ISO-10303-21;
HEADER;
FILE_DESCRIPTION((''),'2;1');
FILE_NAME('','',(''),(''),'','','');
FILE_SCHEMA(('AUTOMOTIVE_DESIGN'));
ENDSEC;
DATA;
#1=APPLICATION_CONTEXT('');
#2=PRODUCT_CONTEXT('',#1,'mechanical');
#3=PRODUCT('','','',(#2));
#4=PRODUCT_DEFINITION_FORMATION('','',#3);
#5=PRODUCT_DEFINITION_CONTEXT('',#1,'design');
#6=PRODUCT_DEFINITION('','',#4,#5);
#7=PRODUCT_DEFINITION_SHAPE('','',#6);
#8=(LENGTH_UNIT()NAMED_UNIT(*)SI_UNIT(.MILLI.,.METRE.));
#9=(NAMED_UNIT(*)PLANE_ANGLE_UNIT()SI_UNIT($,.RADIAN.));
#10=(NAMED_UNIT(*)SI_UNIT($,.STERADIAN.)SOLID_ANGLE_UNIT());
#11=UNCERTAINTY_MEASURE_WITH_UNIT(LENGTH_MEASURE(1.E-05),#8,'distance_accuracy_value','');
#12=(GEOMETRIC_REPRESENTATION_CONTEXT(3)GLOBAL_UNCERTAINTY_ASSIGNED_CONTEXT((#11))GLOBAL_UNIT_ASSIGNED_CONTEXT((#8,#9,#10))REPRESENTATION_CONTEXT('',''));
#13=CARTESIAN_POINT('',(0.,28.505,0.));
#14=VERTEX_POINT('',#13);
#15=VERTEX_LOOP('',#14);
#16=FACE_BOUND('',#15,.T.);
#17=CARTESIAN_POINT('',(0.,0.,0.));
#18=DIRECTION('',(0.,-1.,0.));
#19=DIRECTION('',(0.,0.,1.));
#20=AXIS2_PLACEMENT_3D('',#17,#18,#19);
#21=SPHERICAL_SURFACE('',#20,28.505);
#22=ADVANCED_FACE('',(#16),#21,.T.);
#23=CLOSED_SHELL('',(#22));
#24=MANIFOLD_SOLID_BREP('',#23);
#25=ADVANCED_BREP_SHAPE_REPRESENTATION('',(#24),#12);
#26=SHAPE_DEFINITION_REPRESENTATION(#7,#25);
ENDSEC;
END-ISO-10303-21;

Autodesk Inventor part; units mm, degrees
ref_plane "YZ Plane" through (0, 0, 0) normal (1, 0, 0) x (0, 1, 0)
ref_plane "XZ Plane" through (0, 0, 0) normal (0, 1, 0) x (-1, 0, 0)
ref_plane "XY Plane" through (0, 0, 0) normal (0, 0, 1) x (1, 0, 0)
sketch "Sketch1" plane through (0, 0, 0) normal (0, 0, 1) x (1, 0, 0)
  circle A0 centre (0, 0) radius 28.5
  line L0 (0, 28.5) -> (0, -28.5)
  dimension "d0" = 57
revolve "Revolution1" add sketch "Sketch1" angle 360 about axis through (0, 28.5, 0) along (0, -1, 0)
sketch "Sketch2" plane through (0, 0, 0) normal (1, 0, 0) x (0, 1, 0)
  line L0 (10, 26.6934) -> (10, -26.6934)
  line L1 (-10, 26.6934) -> (-10, -26.6934)
  circle A0 centre (0, 0) radius 28.505
  circle A1 centre (0, 0) radius 28.5 projected
  arc A2 (10, 26.688) -> (-10, 26.688) centre (0, 0) ccw
  arc A3 (-10, -26.688) -> (10, -26.688) centre (0, 0) ccw
  line L2 (-39.907, 0) -> (39.907, 0) projected
  dimension "d6" = 10
  dimension "d7" = 10
  dimension "d8" = 57.01
revolve "Revolution2" add sketch "Sketch2" angle 360 about axis through (0, -10, 0) along (0, 1, 0)
properties part number "Pool_Ball_Stripe"
